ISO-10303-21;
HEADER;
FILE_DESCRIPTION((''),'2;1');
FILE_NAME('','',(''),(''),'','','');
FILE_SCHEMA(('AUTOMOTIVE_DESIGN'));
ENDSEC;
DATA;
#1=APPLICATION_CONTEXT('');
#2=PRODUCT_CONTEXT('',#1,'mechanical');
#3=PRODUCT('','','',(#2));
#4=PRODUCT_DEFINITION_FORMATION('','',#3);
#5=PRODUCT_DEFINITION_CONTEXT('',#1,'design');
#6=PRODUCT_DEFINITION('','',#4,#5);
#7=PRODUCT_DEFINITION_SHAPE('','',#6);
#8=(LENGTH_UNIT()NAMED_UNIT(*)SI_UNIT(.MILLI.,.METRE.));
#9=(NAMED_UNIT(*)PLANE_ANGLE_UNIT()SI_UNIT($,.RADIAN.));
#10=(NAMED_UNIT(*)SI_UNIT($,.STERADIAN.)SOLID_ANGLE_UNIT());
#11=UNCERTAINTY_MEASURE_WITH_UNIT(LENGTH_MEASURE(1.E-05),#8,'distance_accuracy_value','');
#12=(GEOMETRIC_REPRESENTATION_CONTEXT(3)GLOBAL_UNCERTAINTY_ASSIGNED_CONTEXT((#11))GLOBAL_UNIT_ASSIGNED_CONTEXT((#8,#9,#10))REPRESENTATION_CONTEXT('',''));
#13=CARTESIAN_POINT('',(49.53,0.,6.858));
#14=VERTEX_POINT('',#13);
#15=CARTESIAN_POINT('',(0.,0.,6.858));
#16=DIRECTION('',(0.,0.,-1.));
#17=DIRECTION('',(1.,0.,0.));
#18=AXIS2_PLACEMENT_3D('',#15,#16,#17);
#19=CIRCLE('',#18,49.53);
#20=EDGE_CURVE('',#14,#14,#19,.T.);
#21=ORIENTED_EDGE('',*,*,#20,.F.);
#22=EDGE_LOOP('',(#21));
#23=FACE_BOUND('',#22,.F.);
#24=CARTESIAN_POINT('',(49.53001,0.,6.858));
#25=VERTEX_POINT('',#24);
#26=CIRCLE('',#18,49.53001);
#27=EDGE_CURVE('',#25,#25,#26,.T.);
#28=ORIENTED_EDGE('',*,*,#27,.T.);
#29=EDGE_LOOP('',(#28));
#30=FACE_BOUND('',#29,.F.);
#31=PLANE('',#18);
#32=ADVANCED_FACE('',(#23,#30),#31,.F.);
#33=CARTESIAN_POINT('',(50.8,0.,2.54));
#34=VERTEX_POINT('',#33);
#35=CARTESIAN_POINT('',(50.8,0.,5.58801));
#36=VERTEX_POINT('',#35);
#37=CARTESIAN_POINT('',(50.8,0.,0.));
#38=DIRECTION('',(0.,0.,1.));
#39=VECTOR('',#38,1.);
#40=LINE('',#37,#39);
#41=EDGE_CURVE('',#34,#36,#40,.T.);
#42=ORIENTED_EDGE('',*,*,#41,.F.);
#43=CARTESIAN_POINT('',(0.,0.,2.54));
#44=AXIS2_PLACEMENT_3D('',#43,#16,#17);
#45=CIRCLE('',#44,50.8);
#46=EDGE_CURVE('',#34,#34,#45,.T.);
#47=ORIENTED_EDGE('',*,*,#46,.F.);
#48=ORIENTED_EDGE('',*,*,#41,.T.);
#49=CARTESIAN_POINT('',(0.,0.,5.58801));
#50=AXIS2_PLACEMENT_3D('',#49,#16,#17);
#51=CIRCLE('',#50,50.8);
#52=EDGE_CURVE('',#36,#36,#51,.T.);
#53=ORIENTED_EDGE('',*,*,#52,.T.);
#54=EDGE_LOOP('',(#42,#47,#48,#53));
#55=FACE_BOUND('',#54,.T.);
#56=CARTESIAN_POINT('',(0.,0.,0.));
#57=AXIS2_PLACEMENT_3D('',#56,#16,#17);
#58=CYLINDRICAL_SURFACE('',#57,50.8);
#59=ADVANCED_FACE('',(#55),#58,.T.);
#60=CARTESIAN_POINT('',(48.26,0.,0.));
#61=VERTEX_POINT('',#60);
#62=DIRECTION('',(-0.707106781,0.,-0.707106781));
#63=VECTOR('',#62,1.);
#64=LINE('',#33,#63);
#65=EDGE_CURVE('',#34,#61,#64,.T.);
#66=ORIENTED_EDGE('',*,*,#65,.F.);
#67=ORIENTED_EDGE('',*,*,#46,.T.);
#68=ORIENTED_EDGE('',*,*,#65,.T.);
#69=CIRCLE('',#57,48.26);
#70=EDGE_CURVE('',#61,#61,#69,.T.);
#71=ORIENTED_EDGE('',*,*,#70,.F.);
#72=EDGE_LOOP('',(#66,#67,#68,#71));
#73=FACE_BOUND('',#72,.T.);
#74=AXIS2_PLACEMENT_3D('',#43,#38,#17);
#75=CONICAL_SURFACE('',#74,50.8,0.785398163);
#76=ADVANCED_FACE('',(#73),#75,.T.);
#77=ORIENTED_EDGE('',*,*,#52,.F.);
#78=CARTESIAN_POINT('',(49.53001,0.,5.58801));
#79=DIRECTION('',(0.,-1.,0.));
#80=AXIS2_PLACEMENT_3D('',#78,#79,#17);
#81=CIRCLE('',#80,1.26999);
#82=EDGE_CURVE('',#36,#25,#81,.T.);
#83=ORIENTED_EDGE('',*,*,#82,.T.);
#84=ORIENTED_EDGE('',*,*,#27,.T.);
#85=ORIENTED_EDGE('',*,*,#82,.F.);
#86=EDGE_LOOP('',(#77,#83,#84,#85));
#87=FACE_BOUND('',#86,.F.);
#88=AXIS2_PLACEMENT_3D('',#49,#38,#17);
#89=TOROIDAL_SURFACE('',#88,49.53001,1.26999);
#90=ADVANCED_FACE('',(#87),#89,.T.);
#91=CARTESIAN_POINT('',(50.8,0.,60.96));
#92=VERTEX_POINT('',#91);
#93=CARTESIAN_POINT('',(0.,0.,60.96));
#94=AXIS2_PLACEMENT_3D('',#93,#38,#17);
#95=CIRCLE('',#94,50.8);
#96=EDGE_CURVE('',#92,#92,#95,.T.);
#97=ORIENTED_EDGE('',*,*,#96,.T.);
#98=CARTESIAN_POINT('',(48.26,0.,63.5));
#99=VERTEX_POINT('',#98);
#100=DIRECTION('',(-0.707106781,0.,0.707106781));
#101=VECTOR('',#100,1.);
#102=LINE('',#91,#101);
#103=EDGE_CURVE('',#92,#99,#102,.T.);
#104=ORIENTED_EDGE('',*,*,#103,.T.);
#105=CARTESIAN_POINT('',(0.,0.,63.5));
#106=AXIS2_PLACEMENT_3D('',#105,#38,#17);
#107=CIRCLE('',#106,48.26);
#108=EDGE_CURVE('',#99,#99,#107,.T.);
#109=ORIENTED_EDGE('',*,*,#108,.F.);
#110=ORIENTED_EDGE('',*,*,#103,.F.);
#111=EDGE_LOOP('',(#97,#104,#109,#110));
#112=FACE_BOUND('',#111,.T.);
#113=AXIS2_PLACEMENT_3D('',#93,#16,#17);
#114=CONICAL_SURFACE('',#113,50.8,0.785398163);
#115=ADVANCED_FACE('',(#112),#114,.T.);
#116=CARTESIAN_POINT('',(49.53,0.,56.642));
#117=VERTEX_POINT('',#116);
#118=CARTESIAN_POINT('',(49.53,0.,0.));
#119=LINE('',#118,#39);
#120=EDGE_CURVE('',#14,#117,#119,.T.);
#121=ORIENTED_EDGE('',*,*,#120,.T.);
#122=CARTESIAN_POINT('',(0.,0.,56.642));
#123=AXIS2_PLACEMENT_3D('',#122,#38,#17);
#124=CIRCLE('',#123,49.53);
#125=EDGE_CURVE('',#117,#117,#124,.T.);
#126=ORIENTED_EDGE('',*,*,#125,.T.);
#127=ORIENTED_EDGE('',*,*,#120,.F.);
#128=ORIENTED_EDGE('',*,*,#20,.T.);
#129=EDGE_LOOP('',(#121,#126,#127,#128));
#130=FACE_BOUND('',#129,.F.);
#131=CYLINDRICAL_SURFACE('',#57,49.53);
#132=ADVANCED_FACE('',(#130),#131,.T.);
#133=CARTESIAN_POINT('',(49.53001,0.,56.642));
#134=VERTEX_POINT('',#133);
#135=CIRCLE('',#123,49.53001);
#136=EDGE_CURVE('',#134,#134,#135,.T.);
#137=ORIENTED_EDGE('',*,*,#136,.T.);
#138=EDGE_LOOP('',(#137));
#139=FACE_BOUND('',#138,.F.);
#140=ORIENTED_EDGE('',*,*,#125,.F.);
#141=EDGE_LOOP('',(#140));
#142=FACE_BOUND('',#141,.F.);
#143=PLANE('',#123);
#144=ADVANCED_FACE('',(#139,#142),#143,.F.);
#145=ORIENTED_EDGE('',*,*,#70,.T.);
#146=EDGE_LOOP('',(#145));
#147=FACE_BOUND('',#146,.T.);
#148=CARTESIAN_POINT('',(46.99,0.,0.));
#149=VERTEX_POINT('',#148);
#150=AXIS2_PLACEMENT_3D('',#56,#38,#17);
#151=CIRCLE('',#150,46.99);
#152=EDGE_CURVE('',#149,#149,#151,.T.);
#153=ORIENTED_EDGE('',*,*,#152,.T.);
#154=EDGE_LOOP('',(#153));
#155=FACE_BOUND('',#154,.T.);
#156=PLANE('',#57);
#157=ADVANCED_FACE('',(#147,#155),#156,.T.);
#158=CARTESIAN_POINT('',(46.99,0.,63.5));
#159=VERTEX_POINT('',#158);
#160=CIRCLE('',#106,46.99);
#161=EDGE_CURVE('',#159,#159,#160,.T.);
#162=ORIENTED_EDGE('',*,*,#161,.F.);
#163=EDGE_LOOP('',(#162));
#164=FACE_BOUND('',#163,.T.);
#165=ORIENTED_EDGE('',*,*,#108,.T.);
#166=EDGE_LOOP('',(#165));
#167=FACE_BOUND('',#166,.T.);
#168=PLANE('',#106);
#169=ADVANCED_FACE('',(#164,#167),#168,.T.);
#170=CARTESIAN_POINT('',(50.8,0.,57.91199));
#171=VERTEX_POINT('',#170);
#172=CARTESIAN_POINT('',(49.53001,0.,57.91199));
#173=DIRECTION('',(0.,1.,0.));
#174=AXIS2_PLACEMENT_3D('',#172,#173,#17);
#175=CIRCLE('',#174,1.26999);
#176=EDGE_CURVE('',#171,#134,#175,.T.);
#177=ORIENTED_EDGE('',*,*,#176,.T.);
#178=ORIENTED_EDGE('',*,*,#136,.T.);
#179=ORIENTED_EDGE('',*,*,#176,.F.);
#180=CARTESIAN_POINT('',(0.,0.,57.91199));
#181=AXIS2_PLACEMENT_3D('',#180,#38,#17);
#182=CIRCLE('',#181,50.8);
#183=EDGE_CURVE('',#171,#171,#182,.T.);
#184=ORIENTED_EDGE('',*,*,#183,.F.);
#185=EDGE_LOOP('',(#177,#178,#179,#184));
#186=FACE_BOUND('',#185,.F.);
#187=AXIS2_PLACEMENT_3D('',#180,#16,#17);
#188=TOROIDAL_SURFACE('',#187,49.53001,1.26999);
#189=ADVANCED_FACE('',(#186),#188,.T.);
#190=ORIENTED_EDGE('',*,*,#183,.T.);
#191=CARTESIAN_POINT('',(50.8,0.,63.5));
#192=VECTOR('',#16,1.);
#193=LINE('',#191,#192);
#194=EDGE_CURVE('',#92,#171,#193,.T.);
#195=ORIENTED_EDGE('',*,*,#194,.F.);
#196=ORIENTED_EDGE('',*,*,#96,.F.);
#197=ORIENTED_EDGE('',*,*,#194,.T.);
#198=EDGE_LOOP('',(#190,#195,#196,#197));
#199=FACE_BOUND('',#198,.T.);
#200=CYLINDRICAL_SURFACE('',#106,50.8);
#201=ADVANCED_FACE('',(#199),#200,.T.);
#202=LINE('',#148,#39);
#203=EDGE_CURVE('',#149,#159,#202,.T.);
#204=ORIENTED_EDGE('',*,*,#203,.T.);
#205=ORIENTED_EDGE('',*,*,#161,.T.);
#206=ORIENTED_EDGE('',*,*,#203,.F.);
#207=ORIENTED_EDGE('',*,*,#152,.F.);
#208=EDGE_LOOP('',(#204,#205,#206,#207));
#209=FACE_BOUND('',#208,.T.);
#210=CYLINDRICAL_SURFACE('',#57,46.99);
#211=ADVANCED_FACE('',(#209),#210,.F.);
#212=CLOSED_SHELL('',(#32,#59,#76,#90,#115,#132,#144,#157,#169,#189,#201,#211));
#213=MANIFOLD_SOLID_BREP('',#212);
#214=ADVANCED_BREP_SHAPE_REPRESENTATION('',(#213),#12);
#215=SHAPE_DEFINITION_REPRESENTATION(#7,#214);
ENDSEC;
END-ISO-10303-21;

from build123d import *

# Parameters (mm, degrees)
F0_R     = 49.53
F0_R_2   = 46.99
F1_DEPTH = 63.5
F2_R     = 50.8
F2_R_2   = 49.53
F3_DEPTH = 6.858
F4_SIZE  = 2.54
F5_R     = 1.26999
F6_R     = 50.8
F6_R_2   = 49.53
F7_DEPTH = 6.858
F8_SIZE  = 2.54
F9_R     = 1.26999


# Not quite as in the source:
# - a fillet or chamfer is up to 0.001 mm smaller than in the source, because OpenCascade refuses the exact size


with BuildPart() as f1:
    # F0 (on Top) → F1 (new body)
    with BuildSketch(Plane.XY):
        Circle(F0_R)
        Circle(F0_R_2, mode=Mode.SUBTRACT)
    extrude(amount=F1_DEPTH)

    # F2 (on face) → F3 (join)
    with BuildSketch(Plane.XY.offset(63.5)):
        Circle(F2_R)
        Circle(F2_R_2, mode=Mode.SUBTRACT)
    extrude(amount=-F3_DEPTH)

    # F4
    f4_edges = [f1.edges().sort_by_distance(p)[0] for p in [
        (-50.8, 0, 63.5),
    ]]
    chamfer(f4_edges, length=F4_SIZE)

    # F5 (radius 1.27 in the source; OpenCascade refuses exactly that, so slightly less here)
    f5_edges = [f1.edges().sort_by_distance(p)[0] for p in [
        (-50.8, 0, 56.642),
    ]]
    fillet(f5_edges, radius=F5_R)

    # F6 (on face) → F7 (join)
    with BuildSketch(Plane(origin=(0, 0, 0), x_dir=(1, 0, 0), z_dir=(0, 0, -1))):
        Circle(F6_R)
        Circle(F6_R_2, mode=Mode.SUBTRACT)
    extrude(amount=-F7_DEPTH)

    # F8
    f8_edges = [f1.edges().sort_by_distance(p)[0] for p in [
        (-50.8, 0, 0),
    ]]
    chamfer(f8_edges, length=F8_SIZE)

    # F9 (radius 1.27 in the source; OpenCascade refuses exactly that, so slightly less here)
    f9_edges = [f1.edges().sort_by_distance(p)[0] for p in [
        (-50.8, 0, 6.858),
    ]]
    fillet(f9_edges, radius=F9_R)


solid = f1.part
